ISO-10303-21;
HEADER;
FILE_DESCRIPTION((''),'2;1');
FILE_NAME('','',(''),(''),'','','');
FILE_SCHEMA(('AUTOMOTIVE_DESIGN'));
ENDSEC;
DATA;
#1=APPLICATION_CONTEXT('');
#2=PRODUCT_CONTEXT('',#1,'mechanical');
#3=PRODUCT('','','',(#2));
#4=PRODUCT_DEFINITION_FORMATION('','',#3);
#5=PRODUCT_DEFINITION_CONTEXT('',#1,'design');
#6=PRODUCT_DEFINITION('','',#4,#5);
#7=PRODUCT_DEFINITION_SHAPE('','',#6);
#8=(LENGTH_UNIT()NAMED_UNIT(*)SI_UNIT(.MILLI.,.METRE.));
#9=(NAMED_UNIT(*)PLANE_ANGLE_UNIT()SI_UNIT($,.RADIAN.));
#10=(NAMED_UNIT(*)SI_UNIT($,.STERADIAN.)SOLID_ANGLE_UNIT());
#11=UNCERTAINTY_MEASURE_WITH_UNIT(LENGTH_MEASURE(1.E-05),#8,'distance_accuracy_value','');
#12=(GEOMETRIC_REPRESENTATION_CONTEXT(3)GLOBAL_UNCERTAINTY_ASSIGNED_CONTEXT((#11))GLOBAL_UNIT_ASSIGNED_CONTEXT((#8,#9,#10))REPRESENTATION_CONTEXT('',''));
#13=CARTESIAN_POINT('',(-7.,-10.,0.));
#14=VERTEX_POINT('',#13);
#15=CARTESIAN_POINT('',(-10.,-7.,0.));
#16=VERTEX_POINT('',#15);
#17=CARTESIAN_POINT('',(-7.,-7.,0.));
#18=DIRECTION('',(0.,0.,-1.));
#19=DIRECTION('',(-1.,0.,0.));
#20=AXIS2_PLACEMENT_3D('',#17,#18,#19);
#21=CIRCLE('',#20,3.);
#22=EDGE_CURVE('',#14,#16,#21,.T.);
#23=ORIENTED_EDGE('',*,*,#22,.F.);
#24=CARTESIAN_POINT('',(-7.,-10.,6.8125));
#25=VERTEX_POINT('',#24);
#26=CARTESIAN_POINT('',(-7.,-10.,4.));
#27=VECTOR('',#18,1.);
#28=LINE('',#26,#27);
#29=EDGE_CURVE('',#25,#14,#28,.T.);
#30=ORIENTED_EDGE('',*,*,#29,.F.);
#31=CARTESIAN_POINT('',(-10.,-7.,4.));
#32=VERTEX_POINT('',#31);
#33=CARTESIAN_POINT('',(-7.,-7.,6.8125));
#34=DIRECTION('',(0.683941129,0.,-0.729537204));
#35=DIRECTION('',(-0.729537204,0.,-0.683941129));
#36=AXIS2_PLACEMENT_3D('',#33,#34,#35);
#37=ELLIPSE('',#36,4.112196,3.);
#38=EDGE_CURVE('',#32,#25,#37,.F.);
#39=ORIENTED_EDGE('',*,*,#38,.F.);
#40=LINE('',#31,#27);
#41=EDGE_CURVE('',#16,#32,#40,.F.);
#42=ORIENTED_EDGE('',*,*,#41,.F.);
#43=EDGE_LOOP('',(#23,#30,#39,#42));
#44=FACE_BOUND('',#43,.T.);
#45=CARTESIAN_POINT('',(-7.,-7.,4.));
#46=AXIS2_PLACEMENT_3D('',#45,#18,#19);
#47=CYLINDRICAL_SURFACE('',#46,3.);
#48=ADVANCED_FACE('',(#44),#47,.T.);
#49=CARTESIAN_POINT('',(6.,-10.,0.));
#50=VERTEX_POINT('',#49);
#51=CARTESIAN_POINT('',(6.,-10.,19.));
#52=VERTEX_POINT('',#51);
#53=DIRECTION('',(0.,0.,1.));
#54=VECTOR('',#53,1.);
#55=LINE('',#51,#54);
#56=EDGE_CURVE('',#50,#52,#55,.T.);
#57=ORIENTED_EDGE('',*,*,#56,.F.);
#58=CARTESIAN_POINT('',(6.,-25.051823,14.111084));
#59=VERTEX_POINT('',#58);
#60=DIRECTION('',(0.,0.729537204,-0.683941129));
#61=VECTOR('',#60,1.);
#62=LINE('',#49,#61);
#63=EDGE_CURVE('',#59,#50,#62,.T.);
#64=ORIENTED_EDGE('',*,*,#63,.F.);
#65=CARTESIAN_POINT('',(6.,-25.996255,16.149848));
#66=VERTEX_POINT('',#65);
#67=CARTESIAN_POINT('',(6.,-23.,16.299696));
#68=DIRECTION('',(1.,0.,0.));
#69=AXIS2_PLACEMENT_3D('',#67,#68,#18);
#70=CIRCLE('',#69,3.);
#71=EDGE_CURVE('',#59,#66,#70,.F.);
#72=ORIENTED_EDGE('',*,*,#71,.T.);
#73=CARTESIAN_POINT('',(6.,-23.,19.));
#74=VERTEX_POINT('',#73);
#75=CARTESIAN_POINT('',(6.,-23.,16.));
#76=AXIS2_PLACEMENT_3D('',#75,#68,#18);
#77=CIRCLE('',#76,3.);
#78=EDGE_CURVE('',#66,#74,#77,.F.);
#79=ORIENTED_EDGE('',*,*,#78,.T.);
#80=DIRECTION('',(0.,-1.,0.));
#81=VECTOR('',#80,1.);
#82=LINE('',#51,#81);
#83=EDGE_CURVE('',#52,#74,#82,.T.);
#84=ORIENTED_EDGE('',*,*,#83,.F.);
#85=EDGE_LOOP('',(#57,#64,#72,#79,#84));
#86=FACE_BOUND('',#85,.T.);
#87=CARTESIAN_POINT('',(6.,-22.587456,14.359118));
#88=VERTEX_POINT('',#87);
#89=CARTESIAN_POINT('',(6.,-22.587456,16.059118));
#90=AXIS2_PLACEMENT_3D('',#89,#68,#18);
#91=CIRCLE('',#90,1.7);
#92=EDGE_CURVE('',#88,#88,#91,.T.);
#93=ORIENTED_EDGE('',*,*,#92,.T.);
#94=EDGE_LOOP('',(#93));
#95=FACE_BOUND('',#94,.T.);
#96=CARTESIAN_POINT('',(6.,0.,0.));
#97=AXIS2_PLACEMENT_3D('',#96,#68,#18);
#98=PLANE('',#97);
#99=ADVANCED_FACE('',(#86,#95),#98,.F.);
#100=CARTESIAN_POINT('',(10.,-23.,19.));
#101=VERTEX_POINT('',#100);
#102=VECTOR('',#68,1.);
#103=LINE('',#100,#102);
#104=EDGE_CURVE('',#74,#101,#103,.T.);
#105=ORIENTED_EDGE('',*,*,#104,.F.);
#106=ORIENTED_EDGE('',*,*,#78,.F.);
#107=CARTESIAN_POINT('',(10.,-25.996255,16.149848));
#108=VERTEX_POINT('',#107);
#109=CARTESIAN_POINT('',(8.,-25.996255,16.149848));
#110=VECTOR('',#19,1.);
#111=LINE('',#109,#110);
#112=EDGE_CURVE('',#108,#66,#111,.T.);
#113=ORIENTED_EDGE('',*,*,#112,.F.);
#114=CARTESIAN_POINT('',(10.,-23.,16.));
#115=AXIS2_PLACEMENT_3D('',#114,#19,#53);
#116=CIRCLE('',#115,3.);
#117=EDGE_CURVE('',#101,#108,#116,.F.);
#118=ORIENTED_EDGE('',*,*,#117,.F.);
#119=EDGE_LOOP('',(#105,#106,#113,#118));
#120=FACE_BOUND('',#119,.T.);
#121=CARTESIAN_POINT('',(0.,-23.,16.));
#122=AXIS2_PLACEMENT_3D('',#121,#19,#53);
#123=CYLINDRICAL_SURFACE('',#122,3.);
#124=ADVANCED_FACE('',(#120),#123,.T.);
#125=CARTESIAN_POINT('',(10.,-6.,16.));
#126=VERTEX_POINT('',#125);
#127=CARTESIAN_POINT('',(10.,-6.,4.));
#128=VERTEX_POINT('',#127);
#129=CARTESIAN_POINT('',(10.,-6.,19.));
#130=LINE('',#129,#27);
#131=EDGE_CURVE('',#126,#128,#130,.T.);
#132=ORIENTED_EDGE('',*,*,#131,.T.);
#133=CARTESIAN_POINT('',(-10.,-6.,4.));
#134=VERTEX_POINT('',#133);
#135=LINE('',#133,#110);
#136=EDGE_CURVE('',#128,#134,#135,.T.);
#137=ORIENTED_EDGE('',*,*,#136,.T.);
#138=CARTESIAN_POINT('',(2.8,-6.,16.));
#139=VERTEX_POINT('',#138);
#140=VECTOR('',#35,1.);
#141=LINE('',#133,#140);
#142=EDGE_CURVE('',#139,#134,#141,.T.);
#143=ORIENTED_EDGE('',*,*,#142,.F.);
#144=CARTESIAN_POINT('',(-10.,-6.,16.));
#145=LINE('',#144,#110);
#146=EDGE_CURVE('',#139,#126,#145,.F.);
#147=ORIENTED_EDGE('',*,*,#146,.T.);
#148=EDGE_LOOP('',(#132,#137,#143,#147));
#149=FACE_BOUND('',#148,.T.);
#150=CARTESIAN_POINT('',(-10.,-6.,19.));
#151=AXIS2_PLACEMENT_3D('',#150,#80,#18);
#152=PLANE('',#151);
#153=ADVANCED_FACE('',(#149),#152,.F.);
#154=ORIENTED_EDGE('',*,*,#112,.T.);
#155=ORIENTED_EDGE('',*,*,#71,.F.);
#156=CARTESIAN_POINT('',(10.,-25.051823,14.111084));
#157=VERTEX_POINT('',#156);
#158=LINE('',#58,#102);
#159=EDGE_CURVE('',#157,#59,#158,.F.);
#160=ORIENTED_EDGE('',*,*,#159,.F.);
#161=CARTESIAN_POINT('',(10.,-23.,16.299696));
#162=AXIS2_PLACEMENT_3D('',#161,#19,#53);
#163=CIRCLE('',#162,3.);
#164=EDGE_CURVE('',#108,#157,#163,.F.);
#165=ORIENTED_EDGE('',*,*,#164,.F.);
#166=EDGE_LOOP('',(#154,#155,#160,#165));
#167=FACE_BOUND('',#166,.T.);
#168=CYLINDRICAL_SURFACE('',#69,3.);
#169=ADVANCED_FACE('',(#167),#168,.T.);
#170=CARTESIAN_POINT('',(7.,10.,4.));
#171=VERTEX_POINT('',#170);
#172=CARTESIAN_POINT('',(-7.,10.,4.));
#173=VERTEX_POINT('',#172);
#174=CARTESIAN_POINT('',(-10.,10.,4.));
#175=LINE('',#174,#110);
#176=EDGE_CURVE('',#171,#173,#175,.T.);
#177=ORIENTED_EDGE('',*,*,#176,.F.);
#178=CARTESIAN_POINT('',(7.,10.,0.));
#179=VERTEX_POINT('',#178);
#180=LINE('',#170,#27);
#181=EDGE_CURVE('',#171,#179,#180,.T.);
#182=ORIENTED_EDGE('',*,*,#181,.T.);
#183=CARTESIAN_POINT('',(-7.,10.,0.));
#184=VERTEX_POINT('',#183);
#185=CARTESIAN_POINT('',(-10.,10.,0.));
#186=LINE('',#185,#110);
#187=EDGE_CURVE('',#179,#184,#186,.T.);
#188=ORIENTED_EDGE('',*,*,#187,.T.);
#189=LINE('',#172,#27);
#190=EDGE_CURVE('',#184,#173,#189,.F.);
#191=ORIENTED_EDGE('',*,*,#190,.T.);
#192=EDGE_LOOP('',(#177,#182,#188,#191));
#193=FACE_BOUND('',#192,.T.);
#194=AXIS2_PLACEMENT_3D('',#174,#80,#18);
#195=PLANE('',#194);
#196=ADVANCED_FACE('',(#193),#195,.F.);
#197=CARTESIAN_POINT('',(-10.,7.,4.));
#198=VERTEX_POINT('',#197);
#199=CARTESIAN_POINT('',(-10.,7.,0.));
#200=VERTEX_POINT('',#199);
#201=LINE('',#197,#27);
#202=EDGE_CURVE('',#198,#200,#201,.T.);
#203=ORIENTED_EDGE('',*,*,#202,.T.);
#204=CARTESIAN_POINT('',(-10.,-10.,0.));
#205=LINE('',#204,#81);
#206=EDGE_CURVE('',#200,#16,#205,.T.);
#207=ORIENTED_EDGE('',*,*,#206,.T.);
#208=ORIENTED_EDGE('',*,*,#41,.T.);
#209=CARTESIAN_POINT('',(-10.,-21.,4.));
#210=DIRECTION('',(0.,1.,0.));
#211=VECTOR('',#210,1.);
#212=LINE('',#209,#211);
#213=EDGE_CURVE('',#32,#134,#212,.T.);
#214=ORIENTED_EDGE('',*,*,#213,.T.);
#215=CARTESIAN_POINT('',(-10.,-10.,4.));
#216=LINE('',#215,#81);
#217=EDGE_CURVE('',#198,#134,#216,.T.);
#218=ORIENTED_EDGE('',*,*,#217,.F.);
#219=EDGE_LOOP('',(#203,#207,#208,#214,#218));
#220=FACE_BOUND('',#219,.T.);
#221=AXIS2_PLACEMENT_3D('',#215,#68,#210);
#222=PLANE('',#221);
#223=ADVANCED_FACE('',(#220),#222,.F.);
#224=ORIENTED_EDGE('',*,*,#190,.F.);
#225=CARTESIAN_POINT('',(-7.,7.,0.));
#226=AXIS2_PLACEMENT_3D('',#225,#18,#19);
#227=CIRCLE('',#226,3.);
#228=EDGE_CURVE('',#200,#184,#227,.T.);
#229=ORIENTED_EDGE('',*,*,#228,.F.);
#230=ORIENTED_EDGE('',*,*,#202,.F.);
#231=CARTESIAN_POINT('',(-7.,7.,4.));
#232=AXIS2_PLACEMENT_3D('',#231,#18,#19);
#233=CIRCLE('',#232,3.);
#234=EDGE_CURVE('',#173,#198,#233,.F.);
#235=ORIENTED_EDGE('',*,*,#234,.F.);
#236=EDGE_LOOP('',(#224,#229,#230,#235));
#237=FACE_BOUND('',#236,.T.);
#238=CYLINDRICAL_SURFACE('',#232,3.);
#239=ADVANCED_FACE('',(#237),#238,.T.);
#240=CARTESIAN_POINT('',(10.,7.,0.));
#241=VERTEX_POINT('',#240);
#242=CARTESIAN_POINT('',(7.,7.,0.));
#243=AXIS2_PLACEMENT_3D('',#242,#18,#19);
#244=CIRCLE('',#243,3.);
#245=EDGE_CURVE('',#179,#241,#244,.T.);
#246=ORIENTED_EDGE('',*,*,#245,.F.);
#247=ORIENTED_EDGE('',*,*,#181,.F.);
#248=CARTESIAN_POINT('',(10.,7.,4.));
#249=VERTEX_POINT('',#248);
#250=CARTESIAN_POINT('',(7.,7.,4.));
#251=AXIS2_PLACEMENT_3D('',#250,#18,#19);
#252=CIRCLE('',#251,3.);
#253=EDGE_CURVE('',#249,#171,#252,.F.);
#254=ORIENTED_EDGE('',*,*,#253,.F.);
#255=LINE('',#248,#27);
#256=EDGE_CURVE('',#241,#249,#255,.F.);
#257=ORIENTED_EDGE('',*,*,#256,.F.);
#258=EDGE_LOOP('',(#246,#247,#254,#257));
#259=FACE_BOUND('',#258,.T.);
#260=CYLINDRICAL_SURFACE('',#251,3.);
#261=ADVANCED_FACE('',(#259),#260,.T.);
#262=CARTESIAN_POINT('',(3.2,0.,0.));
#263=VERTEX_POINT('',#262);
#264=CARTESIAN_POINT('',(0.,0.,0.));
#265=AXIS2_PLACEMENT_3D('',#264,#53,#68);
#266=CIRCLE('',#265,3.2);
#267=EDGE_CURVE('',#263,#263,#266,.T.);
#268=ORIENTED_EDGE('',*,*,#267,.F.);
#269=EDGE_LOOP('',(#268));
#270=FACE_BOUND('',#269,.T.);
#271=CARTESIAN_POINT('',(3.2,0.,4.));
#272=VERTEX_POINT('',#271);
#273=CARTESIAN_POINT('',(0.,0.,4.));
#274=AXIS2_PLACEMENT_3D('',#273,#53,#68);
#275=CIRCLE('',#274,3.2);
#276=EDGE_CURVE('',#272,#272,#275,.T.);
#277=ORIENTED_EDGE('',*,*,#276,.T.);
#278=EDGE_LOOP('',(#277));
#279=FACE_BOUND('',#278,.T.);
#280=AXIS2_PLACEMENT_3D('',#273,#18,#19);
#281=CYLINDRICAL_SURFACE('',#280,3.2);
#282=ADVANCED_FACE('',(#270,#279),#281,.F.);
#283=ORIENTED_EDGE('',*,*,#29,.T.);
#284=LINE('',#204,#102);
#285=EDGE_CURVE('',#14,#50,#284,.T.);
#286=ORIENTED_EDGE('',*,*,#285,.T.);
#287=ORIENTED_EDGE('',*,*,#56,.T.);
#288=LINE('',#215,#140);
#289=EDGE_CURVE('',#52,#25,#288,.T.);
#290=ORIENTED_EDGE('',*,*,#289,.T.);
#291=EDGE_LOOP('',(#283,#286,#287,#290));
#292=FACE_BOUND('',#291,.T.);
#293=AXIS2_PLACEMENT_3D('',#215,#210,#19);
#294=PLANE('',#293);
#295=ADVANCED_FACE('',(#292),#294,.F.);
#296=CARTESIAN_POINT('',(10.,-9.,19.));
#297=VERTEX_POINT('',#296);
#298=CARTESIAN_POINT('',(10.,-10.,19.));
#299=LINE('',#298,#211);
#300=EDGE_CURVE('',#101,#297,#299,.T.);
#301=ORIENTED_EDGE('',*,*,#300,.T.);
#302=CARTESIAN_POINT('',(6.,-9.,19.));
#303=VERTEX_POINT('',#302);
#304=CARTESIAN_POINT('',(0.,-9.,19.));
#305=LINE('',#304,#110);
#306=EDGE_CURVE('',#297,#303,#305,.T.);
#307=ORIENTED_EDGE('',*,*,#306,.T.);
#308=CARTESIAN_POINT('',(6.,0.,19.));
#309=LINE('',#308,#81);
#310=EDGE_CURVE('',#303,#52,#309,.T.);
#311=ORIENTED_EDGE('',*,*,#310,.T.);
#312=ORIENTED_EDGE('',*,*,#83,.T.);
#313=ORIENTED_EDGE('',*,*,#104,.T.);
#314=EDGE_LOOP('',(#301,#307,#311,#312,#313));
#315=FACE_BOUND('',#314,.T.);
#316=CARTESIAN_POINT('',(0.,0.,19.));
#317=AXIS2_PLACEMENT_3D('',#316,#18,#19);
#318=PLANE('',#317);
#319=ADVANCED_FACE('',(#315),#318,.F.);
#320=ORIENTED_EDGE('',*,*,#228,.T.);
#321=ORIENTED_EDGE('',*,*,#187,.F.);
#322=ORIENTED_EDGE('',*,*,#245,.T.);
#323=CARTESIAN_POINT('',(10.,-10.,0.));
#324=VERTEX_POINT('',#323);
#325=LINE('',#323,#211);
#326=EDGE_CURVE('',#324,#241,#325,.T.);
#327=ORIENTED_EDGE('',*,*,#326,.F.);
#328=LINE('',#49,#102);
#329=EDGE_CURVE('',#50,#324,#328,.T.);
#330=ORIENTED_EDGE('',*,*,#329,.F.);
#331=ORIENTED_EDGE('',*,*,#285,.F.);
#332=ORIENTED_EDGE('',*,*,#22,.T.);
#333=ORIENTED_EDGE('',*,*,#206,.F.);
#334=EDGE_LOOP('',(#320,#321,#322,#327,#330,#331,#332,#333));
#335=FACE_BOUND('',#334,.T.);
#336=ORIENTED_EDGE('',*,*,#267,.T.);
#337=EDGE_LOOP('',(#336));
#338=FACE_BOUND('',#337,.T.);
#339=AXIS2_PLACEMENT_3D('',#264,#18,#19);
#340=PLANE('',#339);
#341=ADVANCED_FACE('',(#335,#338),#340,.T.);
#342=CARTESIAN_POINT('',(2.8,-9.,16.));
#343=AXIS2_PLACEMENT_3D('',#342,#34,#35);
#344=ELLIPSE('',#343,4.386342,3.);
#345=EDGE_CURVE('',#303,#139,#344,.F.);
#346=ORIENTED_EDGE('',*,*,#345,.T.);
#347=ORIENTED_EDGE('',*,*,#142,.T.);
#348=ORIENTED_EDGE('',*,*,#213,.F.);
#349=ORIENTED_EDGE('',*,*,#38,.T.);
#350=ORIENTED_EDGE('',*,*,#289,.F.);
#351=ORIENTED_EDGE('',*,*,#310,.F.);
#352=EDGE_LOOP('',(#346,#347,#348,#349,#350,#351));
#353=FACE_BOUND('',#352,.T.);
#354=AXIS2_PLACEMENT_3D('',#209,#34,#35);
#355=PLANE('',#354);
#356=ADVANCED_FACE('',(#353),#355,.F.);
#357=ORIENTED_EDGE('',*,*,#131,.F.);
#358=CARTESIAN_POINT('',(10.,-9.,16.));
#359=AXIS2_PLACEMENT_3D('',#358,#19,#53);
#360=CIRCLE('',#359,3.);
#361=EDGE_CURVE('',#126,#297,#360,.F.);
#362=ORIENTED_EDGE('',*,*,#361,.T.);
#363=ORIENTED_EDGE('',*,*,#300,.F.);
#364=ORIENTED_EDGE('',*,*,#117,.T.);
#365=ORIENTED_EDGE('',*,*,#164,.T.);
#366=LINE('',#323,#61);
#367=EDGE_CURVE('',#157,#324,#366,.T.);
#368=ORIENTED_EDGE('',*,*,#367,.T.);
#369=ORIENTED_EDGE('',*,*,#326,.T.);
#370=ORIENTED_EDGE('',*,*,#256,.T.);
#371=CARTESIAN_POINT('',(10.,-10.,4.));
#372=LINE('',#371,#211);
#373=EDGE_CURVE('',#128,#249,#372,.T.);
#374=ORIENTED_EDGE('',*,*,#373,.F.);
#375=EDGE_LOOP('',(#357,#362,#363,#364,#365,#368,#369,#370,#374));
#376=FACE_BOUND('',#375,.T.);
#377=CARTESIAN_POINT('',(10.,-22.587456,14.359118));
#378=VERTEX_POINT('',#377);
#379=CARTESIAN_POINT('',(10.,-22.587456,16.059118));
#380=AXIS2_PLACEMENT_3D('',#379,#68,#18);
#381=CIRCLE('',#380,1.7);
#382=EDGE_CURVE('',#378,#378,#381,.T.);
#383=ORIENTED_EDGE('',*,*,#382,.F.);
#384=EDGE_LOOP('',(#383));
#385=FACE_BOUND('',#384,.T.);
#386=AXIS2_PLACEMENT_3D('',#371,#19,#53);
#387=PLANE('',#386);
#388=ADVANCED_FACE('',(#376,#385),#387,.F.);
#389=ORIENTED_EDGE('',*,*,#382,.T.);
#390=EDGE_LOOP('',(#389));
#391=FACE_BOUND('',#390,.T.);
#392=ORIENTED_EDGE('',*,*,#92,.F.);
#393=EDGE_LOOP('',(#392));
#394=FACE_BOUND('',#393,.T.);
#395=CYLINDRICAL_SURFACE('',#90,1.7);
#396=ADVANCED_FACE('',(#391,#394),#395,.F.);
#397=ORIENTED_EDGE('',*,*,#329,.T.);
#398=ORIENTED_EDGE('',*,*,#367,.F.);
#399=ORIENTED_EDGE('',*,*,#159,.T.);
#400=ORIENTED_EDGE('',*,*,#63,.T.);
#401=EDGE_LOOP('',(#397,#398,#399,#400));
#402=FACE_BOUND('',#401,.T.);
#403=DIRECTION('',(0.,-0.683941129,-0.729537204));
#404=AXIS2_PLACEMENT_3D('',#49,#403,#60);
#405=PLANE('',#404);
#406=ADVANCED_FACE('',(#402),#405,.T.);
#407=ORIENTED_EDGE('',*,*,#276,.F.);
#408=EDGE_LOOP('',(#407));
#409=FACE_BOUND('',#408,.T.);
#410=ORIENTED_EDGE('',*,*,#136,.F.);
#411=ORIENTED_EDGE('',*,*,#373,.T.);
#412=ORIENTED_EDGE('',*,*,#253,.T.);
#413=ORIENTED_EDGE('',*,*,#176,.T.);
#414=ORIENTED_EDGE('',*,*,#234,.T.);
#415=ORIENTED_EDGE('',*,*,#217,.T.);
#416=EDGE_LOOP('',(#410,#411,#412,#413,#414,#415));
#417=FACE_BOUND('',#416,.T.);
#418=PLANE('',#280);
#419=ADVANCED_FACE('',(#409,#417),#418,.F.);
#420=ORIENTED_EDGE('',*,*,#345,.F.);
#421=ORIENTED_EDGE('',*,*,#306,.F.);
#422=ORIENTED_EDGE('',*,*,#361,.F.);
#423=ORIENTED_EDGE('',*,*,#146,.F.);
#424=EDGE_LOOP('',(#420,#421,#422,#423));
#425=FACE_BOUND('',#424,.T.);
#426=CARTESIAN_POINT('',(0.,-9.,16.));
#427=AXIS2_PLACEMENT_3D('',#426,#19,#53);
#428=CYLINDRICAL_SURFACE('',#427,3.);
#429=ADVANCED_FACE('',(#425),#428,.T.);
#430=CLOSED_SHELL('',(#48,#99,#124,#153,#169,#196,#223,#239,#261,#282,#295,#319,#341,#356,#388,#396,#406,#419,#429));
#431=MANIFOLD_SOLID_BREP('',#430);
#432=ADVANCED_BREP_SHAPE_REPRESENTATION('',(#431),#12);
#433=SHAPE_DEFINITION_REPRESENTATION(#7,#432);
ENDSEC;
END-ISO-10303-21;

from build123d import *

# Parameters (mm, degrees)
SKETCH1_W           = 20
SKETCH1_H           = 20
SKETCH1_R           = 3.2
BOSS_EXTRUDE1_DEPTH = 4
SKETCH2_W           = 20
SKETCH2_H           = 4
BOSS_EXTRUDE2_DEPTH = 15
CUT_EXTRUDE1_DEPTH  = 15
BOSS_EXTRUDE3_DEPTH = 4
SKETCH5_R           = 1.7
CUT_EXTRUDE2_DEPTH  = 4
FILLET1_R           = 3
FILLET2_R           = 3


with BuildPart() as part:
    # Sketch1 → Boss-Extrude1 (new body)
    with BuildSketch(Plane.XY):
        Rectangle(SKETCH1_W, SKETCH1_H)
        Circle(SKETCH1_R, mode=Mode.SUBTRACT)
    extrude(amount=BOSS_EXTRUDE1_DEPTH)

    # Sketch2 → Boss-Extrude2 (add)
    with BuildSketch(Plane.XY.offset(4)):
        with Locations((0, -8)):
            Rectangle(SKETCH2_W, SKETCH2_H)
    extrude(amount=BOSS_EXTRUDE2_DEPTH)

    # Sketch3 → Cut-Extrude1 (cut)
    with BuildSketch(Plane(origin=(0, -6, 0), x_dir=(1, 0, 0), z_dir=(0, 1, 0))):
        Polygon((-10, -19), (-10, -4), (6, -19), align=None)
    extrude(amount=-CUT_EXTRUDE1_DEPTH, mode=Mode.SUBTRACT)

    # Sketch4 → Boss-Extrude3 (add)
    with BuildSketch(Plane(origin=(10, 0, 0), x_dir=(0, 0, -1), z_dir=(1, 0, 0))):
        Polygon((0, -10), (-15, -26), (-19, -26), (-19, -10), align=None)
    extrude(amount=-BOSS_EXTRUDE3_DEPTH)

    # Sketch5 → Cut-Extrude2 (cut)
    with BuildSketch(Plane(origin=(10, 0, 0), x_dir=(0, 0, -1), z_dir=(1, 0, 0))):
        with Locations((-16.059117511, -22.587455859)):
            Circle(SKETCH5_R)
    extrude(amount=-CUT_EXTRUDE2_DEPTH, mode=Mode.SUBTRACT)

    # Fillet1
    # the kernel refuses this fillet: 3 mm, written as the material it takes off along each edge
    with BuildSketch(Plane(origin=(13.249240093, -26, 15), x_dir=(0, 0.7295372041400854, -0.6839411288813294), z_dir=(-1, 0, 0))) as fillet1_piece_1:
        with BuildLine():
            CenterArc((FILLET1_R * 0.433232012466, -FILLET1_R), FILLET1_R, 90, 46.847610266)
            Line((-FILLET1_R * 0.296305191674, -FILLET1_R * 0.316058871119), (0, 0))
            Line((0, 0), (FILLET1_R * 0.433232012466, 0))
        make_face()
    extrude(amount=10.498480187, mode=Mode.SUBTRACT)
    with BuildSketch(Plane(origin=(17.5, -26, 19), x_dir=(0, 0, -1), z_dir=(-1, 0, 0))) as fillet1_piece_2:
        with BuildLine():
            CenterArc((FILLET1_R, -FILLET1_R), FILLET1_R, 90, 90)
            Line((0, -FILLET1_R), (0, 0))
            Line((0, 0), (FILLET1_R, 0))
        make_face()
    extrude(amount=19, mode=Mode.SUBTRACT)

    # Fillet2
    fillet2_edges = [part.edges().sort_by_distance(p)[0] for p in [
        (8, -6, 19),
        (-10, -10, 2),
        (-10, 10, 2),
        (10, 10, 2),
    ]]
    fillet(fillet2_edges, radius=FILLET2_R)


solid = part.part
